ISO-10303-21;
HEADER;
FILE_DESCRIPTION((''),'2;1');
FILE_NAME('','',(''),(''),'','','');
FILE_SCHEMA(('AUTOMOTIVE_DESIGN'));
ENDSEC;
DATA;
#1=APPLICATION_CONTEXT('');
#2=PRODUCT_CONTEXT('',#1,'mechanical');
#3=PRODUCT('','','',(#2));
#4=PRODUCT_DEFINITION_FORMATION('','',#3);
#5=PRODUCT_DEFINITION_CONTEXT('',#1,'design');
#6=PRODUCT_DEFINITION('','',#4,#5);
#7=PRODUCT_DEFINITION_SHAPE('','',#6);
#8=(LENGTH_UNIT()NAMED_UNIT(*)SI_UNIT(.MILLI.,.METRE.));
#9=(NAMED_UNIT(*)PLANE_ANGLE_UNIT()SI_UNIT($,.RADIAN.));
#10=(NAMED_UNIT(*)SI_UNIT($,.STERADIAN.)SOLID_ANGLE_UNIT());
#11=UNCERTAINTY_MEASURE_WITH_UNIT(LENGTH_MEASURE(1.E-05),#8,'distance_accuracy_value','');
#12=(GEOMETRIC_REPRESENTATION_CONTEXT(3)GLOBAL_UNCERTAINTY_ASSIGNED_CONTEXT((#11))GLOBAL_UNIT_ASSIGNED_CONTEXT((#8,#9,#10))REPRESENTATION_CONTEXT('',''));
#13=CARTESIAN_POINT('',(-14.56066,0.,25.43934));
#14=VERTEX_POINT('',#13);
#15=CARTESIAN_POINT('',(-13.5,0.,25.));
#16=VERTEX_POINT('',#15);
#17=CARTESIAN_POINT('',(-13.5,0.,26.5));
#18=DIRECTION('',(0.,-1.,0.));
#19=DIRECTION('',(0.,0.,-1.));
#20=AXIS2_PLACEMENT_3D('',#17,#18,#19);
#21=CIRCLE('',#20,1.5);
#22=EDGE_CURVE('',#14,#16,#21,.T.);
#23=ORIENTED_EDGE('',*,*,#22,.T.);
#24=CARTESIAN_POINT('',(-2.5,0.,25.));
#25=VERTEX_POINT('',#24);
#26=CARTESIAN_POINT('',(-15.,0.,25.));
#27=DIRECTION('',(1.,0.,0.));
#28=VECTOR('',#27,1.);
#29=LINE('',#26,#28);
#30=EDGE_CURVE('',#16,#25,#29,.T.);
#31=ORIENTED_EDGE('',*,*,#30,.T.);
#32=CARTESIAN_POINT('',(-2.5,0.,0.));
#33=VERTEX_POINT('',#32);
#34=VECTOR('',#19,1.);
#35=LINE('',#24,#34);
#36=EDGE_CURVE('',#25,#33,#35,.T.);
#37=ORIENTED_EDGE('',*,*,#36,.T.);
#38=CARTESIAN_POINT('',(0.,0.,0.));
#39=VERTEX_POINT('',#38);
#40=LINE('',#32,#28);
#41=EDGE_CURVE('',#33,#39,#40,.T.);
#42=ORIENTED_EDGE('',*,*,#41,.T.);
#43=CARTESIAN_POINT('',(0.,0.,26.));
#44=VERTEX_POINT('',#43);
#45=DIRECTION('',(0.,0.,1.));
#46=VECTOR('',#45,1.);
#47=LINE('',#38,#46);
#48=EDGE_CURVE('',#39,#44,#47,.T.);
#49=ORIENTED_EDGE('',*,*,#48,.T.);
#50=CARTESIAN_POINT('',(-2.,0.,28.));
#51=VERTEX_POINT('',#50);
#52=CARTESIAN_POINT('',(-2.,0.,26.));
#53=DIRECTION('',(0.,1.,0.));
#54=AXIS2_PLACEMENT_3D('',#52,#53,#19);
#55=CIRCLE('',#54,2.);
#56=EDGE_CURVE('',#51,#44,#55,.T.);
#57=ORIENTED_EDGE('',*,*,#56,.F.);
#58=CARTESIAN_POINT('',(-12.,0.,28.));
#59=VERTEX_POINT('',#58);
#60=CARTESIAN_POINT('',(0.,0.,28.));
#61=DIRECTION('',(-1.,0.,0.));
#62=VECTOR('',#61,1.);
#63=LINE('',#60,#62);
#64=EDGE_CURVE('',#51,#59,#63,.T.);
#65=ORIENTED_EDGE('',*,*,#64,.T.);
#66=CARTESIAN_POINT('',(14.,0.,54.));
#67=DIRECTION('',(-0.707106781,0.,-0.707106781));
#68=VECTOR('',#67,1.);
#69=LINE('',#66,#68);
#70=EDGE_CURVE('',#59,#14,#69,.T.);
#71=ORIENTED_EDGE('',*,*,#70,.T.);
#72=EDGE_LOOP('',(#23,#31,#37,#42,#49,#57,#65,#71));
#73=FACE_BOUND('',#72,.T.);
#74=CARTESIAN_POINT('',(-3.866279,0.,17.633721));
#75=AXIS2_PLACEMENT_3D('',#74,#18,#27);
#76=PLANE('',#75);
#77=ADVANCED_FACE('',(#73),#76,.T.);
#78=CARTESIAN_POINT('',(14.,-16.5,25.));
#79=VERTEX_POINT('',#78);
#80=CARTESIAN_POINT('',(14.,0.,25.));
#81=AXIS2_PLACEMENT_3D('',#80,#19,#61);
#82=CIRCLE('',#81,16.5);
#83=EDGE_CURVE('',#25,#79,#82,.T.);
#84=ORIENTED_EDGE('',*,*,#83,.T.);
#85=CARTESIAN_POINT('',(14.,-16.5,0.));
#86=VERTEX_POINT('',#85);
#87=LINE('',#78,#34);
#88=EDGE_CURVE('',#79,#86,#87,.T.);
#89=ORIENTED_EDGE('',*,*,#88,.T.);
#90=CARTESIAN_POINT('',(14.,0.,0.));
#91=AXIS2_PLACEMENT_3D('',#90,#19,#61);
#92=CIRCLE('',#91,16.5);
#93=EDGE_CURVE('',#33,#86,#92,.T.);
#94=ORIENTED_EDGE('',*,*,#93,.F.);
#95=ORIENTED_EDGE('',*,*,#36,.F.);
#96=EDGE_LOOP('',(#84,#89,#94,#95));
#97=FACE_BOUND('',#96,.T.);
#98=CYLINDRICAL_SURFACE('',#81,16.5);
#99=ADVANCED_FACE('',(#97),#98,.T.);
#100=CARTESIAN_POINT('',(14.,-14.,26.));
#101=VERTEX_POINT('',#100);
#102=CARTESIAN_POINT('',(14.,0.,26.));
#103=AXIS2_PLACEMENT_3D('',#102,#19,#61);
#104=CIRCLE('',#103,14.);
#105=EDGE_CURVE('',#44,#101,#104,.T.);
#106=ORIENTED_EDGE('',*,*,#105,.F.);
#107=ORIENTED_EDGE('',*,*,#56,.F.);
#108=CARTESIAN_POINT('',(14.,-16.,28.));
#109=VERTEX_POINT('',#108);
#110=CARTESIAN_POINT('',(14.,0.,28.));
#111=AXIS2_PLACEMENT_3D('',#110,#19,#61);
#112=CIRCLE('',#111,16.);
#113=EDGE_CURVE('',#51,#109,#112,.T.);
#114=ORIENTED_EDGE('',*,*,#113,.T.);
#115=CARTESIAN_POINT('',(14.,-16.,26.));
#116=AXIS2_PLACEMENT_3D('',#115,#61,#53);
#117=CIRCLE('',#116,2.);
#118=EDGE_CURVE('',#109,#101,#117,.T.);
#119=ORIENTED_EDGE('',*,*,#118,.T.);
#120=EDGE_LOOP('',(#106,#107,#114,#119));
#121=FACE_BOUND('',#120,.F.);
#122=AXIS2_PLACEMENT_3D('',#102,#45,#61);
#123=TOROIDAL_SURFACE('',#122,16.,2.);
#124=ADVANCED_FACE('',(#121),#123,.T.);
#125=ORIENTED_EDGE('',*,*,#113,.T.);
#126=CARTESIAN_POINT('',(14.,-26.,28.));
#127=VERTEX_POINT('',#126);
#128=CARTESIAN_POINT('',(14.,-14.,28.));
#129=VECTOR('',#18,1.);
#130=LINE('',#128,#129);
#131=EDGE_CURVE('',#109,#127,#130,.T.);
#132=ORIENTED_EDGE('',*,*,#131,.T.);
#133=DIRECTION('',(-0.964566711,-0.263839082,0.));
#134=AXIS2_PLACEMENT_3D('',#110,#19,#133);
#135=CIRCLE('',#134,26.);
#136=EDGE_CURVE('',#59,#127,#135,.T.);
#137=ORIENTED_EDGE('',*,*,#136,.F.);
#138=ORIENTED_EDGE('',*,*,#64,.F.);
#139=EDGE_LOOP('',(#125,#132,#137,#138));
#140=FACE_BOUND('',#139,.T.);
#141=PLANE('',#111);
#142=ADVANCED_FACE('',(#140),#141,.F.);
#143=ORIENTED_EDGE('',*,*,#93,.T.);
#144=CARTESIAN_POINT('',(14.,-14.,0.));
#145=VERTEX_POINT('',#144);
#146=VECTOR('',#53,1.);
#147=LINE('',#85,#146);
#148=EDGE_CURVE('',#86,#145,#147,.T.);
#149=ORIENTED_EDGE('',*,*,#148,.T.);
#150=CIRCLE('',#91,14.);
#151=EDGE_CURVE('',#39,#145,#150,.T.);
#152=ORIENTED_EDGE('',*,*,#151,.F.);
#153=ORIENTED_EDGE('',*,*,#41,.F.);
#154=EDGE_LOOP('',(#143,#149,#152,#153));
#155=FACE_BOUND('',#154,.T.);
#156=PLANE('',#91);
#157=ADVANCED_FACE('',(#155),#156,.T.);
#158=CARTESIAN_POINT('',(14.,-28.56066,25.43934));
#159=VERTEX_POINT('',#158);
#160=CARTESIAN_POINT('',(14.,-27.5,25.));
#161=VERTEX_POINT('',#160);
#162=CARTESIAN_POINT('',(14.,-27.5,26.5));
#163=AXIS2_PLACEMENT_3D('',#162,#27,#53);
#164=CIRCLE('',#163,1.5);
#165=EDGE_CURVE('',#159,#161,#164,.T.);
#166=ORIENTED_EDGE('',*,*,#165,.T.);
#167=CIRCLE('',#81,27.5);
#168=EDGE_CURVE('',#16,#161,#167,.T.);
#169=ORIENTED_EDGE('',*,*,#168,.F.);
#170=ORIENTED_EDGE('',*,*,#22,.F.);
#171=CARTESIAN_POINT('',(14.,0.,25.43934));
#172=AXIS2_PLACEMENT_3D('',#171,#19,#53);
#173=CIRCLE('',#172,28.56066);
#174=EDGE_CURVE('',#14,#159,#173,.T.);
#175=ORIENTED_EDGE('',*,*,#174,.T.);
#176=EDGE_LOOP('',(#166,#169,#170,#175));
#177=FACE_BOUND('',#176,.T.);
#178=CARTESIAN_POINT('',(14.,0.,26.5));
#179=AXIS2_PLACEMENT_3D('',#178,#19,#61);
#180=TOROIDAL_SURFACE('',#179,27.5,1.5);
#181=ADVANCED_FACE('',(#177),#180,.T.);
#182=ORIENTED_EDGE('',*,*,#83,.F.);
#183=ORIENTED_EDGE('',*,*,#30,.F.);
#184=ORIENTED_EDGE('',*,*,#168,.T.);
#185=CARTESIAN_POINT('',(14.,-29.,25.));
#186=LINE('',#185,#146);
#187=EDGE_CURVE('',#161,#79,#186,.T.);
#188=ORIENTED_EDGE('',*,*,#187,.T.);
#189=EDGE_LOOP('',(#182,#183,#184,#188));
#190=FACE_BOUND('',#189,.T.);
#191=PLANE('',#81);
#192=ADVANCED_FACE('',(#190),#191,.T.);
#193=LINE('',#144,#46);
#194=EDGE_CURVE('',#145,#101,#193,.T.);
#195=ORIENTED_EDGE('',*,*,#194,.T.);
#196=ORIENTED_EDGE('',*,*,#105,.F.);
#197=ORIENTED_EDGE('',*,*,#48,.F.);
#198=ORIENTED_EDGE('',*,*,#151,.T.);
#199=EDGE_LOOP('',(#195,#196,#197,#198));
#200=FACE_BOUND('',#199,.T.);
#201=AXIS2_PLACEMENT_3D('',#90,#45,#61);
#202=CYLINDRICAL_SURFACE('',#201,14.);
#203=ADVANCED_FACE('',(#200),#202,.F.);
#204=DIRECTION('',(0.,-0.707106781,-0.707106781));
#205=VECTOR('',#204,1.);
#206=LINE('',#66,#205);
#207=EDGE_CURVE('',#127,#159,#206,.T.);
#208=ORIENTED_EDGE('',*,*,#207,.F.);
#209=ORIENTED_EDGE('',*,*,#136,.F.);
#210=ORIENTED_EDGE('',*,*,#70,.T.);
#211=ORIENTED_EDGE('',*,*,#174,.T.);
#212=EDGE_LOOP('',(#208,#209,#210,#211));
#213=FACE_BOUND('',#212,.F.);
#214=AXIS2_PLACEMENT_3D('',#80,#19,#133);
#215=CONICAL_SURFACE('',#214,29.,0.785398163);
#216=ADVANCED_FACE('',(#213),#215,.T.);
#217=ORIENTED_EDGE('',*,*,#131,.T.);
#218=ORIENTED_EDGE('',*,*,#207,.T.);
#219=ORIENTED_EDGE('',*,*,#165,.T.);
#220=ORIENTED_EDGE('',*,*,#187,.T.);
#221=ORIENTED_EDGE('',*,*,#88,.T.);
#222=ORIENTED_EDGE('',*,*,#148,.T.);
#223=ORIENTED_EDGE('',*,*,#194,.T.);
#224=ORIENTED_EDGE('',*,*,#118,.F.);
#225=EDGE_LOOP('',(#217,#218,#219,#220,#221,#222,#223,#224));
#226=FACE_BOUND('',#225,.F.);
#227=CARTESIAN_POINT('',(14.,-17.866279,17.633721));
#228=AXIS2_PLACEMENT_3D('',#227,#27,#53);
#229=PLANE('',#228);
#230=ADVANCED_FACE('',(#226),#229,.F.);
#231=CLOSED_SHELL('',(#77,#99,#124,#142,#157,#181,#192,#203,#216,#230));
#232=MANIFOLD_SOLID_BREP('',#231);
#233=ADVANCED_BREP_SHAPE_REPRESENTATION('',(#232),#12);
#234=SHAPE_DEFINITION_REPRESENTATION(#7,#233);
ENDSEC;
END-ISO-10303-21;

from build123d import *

# Parameters (mm, degrees)
F1_ANGLE    = 270
F2_R        = 1.5
F3_T2_ANGLE = 300.5959645066
F4_R        = 2


# Not quite as in the source:
# - a fillet or chamfer that OpenCascade refuses, or shapes differently, is made with other operations: its cross-section is extruded or revolved along the edge and cut away or added


with BuildPart() as f1:
    # F0 (on Front) → F1 (revolve)
    with BuildSketch(Plane.XZ):
        Polygon((-2.5, 0), (0, 0), (0, 28), (-15, 28), (-15, 25), (-12.5, 25), (-2.5, 25), align=None)
    revolve(axis=Axis((14, 0, -3.1492561102), (0, 0, -1)), revolution_arc=F1_ANGLE)

    # F2
    f2_edges = [f1.edges().sort_by_distance(p)[0] for p in [
        (34.506097, 20.506097, 25),
    ]]
    fillet(f2_edges, radius=F2_R)

    # F3: chamfer of 3 on 1 edges, made by hand

    # F3_s1 → F3_t2 (revolve, cut)
    with BuildSketch(Plane(origin=(0.974554854, -3.562865531, 0), x_dir=(0, 0, 1), z_dir=(0.2638390816, -0.9645667105, 0))):
        Polygon((25, 15.496066053), (28, 12.496066053), (28, 15.496066053), align=None)
    revolve(axis=Axis((14, 0, 28), (0, 0, -1)), revolution_arc=F3_T2_ANGLE, mode=Mode.SUBTRACT)

    # F4
    f4_edges = [f1.edges().sort_by_distance(p)[0] for p in [
        (23.899495, 9.899495, 28),
    ]]
    fillet(f4_edges, radius=F4_R)


solid = f1.part
